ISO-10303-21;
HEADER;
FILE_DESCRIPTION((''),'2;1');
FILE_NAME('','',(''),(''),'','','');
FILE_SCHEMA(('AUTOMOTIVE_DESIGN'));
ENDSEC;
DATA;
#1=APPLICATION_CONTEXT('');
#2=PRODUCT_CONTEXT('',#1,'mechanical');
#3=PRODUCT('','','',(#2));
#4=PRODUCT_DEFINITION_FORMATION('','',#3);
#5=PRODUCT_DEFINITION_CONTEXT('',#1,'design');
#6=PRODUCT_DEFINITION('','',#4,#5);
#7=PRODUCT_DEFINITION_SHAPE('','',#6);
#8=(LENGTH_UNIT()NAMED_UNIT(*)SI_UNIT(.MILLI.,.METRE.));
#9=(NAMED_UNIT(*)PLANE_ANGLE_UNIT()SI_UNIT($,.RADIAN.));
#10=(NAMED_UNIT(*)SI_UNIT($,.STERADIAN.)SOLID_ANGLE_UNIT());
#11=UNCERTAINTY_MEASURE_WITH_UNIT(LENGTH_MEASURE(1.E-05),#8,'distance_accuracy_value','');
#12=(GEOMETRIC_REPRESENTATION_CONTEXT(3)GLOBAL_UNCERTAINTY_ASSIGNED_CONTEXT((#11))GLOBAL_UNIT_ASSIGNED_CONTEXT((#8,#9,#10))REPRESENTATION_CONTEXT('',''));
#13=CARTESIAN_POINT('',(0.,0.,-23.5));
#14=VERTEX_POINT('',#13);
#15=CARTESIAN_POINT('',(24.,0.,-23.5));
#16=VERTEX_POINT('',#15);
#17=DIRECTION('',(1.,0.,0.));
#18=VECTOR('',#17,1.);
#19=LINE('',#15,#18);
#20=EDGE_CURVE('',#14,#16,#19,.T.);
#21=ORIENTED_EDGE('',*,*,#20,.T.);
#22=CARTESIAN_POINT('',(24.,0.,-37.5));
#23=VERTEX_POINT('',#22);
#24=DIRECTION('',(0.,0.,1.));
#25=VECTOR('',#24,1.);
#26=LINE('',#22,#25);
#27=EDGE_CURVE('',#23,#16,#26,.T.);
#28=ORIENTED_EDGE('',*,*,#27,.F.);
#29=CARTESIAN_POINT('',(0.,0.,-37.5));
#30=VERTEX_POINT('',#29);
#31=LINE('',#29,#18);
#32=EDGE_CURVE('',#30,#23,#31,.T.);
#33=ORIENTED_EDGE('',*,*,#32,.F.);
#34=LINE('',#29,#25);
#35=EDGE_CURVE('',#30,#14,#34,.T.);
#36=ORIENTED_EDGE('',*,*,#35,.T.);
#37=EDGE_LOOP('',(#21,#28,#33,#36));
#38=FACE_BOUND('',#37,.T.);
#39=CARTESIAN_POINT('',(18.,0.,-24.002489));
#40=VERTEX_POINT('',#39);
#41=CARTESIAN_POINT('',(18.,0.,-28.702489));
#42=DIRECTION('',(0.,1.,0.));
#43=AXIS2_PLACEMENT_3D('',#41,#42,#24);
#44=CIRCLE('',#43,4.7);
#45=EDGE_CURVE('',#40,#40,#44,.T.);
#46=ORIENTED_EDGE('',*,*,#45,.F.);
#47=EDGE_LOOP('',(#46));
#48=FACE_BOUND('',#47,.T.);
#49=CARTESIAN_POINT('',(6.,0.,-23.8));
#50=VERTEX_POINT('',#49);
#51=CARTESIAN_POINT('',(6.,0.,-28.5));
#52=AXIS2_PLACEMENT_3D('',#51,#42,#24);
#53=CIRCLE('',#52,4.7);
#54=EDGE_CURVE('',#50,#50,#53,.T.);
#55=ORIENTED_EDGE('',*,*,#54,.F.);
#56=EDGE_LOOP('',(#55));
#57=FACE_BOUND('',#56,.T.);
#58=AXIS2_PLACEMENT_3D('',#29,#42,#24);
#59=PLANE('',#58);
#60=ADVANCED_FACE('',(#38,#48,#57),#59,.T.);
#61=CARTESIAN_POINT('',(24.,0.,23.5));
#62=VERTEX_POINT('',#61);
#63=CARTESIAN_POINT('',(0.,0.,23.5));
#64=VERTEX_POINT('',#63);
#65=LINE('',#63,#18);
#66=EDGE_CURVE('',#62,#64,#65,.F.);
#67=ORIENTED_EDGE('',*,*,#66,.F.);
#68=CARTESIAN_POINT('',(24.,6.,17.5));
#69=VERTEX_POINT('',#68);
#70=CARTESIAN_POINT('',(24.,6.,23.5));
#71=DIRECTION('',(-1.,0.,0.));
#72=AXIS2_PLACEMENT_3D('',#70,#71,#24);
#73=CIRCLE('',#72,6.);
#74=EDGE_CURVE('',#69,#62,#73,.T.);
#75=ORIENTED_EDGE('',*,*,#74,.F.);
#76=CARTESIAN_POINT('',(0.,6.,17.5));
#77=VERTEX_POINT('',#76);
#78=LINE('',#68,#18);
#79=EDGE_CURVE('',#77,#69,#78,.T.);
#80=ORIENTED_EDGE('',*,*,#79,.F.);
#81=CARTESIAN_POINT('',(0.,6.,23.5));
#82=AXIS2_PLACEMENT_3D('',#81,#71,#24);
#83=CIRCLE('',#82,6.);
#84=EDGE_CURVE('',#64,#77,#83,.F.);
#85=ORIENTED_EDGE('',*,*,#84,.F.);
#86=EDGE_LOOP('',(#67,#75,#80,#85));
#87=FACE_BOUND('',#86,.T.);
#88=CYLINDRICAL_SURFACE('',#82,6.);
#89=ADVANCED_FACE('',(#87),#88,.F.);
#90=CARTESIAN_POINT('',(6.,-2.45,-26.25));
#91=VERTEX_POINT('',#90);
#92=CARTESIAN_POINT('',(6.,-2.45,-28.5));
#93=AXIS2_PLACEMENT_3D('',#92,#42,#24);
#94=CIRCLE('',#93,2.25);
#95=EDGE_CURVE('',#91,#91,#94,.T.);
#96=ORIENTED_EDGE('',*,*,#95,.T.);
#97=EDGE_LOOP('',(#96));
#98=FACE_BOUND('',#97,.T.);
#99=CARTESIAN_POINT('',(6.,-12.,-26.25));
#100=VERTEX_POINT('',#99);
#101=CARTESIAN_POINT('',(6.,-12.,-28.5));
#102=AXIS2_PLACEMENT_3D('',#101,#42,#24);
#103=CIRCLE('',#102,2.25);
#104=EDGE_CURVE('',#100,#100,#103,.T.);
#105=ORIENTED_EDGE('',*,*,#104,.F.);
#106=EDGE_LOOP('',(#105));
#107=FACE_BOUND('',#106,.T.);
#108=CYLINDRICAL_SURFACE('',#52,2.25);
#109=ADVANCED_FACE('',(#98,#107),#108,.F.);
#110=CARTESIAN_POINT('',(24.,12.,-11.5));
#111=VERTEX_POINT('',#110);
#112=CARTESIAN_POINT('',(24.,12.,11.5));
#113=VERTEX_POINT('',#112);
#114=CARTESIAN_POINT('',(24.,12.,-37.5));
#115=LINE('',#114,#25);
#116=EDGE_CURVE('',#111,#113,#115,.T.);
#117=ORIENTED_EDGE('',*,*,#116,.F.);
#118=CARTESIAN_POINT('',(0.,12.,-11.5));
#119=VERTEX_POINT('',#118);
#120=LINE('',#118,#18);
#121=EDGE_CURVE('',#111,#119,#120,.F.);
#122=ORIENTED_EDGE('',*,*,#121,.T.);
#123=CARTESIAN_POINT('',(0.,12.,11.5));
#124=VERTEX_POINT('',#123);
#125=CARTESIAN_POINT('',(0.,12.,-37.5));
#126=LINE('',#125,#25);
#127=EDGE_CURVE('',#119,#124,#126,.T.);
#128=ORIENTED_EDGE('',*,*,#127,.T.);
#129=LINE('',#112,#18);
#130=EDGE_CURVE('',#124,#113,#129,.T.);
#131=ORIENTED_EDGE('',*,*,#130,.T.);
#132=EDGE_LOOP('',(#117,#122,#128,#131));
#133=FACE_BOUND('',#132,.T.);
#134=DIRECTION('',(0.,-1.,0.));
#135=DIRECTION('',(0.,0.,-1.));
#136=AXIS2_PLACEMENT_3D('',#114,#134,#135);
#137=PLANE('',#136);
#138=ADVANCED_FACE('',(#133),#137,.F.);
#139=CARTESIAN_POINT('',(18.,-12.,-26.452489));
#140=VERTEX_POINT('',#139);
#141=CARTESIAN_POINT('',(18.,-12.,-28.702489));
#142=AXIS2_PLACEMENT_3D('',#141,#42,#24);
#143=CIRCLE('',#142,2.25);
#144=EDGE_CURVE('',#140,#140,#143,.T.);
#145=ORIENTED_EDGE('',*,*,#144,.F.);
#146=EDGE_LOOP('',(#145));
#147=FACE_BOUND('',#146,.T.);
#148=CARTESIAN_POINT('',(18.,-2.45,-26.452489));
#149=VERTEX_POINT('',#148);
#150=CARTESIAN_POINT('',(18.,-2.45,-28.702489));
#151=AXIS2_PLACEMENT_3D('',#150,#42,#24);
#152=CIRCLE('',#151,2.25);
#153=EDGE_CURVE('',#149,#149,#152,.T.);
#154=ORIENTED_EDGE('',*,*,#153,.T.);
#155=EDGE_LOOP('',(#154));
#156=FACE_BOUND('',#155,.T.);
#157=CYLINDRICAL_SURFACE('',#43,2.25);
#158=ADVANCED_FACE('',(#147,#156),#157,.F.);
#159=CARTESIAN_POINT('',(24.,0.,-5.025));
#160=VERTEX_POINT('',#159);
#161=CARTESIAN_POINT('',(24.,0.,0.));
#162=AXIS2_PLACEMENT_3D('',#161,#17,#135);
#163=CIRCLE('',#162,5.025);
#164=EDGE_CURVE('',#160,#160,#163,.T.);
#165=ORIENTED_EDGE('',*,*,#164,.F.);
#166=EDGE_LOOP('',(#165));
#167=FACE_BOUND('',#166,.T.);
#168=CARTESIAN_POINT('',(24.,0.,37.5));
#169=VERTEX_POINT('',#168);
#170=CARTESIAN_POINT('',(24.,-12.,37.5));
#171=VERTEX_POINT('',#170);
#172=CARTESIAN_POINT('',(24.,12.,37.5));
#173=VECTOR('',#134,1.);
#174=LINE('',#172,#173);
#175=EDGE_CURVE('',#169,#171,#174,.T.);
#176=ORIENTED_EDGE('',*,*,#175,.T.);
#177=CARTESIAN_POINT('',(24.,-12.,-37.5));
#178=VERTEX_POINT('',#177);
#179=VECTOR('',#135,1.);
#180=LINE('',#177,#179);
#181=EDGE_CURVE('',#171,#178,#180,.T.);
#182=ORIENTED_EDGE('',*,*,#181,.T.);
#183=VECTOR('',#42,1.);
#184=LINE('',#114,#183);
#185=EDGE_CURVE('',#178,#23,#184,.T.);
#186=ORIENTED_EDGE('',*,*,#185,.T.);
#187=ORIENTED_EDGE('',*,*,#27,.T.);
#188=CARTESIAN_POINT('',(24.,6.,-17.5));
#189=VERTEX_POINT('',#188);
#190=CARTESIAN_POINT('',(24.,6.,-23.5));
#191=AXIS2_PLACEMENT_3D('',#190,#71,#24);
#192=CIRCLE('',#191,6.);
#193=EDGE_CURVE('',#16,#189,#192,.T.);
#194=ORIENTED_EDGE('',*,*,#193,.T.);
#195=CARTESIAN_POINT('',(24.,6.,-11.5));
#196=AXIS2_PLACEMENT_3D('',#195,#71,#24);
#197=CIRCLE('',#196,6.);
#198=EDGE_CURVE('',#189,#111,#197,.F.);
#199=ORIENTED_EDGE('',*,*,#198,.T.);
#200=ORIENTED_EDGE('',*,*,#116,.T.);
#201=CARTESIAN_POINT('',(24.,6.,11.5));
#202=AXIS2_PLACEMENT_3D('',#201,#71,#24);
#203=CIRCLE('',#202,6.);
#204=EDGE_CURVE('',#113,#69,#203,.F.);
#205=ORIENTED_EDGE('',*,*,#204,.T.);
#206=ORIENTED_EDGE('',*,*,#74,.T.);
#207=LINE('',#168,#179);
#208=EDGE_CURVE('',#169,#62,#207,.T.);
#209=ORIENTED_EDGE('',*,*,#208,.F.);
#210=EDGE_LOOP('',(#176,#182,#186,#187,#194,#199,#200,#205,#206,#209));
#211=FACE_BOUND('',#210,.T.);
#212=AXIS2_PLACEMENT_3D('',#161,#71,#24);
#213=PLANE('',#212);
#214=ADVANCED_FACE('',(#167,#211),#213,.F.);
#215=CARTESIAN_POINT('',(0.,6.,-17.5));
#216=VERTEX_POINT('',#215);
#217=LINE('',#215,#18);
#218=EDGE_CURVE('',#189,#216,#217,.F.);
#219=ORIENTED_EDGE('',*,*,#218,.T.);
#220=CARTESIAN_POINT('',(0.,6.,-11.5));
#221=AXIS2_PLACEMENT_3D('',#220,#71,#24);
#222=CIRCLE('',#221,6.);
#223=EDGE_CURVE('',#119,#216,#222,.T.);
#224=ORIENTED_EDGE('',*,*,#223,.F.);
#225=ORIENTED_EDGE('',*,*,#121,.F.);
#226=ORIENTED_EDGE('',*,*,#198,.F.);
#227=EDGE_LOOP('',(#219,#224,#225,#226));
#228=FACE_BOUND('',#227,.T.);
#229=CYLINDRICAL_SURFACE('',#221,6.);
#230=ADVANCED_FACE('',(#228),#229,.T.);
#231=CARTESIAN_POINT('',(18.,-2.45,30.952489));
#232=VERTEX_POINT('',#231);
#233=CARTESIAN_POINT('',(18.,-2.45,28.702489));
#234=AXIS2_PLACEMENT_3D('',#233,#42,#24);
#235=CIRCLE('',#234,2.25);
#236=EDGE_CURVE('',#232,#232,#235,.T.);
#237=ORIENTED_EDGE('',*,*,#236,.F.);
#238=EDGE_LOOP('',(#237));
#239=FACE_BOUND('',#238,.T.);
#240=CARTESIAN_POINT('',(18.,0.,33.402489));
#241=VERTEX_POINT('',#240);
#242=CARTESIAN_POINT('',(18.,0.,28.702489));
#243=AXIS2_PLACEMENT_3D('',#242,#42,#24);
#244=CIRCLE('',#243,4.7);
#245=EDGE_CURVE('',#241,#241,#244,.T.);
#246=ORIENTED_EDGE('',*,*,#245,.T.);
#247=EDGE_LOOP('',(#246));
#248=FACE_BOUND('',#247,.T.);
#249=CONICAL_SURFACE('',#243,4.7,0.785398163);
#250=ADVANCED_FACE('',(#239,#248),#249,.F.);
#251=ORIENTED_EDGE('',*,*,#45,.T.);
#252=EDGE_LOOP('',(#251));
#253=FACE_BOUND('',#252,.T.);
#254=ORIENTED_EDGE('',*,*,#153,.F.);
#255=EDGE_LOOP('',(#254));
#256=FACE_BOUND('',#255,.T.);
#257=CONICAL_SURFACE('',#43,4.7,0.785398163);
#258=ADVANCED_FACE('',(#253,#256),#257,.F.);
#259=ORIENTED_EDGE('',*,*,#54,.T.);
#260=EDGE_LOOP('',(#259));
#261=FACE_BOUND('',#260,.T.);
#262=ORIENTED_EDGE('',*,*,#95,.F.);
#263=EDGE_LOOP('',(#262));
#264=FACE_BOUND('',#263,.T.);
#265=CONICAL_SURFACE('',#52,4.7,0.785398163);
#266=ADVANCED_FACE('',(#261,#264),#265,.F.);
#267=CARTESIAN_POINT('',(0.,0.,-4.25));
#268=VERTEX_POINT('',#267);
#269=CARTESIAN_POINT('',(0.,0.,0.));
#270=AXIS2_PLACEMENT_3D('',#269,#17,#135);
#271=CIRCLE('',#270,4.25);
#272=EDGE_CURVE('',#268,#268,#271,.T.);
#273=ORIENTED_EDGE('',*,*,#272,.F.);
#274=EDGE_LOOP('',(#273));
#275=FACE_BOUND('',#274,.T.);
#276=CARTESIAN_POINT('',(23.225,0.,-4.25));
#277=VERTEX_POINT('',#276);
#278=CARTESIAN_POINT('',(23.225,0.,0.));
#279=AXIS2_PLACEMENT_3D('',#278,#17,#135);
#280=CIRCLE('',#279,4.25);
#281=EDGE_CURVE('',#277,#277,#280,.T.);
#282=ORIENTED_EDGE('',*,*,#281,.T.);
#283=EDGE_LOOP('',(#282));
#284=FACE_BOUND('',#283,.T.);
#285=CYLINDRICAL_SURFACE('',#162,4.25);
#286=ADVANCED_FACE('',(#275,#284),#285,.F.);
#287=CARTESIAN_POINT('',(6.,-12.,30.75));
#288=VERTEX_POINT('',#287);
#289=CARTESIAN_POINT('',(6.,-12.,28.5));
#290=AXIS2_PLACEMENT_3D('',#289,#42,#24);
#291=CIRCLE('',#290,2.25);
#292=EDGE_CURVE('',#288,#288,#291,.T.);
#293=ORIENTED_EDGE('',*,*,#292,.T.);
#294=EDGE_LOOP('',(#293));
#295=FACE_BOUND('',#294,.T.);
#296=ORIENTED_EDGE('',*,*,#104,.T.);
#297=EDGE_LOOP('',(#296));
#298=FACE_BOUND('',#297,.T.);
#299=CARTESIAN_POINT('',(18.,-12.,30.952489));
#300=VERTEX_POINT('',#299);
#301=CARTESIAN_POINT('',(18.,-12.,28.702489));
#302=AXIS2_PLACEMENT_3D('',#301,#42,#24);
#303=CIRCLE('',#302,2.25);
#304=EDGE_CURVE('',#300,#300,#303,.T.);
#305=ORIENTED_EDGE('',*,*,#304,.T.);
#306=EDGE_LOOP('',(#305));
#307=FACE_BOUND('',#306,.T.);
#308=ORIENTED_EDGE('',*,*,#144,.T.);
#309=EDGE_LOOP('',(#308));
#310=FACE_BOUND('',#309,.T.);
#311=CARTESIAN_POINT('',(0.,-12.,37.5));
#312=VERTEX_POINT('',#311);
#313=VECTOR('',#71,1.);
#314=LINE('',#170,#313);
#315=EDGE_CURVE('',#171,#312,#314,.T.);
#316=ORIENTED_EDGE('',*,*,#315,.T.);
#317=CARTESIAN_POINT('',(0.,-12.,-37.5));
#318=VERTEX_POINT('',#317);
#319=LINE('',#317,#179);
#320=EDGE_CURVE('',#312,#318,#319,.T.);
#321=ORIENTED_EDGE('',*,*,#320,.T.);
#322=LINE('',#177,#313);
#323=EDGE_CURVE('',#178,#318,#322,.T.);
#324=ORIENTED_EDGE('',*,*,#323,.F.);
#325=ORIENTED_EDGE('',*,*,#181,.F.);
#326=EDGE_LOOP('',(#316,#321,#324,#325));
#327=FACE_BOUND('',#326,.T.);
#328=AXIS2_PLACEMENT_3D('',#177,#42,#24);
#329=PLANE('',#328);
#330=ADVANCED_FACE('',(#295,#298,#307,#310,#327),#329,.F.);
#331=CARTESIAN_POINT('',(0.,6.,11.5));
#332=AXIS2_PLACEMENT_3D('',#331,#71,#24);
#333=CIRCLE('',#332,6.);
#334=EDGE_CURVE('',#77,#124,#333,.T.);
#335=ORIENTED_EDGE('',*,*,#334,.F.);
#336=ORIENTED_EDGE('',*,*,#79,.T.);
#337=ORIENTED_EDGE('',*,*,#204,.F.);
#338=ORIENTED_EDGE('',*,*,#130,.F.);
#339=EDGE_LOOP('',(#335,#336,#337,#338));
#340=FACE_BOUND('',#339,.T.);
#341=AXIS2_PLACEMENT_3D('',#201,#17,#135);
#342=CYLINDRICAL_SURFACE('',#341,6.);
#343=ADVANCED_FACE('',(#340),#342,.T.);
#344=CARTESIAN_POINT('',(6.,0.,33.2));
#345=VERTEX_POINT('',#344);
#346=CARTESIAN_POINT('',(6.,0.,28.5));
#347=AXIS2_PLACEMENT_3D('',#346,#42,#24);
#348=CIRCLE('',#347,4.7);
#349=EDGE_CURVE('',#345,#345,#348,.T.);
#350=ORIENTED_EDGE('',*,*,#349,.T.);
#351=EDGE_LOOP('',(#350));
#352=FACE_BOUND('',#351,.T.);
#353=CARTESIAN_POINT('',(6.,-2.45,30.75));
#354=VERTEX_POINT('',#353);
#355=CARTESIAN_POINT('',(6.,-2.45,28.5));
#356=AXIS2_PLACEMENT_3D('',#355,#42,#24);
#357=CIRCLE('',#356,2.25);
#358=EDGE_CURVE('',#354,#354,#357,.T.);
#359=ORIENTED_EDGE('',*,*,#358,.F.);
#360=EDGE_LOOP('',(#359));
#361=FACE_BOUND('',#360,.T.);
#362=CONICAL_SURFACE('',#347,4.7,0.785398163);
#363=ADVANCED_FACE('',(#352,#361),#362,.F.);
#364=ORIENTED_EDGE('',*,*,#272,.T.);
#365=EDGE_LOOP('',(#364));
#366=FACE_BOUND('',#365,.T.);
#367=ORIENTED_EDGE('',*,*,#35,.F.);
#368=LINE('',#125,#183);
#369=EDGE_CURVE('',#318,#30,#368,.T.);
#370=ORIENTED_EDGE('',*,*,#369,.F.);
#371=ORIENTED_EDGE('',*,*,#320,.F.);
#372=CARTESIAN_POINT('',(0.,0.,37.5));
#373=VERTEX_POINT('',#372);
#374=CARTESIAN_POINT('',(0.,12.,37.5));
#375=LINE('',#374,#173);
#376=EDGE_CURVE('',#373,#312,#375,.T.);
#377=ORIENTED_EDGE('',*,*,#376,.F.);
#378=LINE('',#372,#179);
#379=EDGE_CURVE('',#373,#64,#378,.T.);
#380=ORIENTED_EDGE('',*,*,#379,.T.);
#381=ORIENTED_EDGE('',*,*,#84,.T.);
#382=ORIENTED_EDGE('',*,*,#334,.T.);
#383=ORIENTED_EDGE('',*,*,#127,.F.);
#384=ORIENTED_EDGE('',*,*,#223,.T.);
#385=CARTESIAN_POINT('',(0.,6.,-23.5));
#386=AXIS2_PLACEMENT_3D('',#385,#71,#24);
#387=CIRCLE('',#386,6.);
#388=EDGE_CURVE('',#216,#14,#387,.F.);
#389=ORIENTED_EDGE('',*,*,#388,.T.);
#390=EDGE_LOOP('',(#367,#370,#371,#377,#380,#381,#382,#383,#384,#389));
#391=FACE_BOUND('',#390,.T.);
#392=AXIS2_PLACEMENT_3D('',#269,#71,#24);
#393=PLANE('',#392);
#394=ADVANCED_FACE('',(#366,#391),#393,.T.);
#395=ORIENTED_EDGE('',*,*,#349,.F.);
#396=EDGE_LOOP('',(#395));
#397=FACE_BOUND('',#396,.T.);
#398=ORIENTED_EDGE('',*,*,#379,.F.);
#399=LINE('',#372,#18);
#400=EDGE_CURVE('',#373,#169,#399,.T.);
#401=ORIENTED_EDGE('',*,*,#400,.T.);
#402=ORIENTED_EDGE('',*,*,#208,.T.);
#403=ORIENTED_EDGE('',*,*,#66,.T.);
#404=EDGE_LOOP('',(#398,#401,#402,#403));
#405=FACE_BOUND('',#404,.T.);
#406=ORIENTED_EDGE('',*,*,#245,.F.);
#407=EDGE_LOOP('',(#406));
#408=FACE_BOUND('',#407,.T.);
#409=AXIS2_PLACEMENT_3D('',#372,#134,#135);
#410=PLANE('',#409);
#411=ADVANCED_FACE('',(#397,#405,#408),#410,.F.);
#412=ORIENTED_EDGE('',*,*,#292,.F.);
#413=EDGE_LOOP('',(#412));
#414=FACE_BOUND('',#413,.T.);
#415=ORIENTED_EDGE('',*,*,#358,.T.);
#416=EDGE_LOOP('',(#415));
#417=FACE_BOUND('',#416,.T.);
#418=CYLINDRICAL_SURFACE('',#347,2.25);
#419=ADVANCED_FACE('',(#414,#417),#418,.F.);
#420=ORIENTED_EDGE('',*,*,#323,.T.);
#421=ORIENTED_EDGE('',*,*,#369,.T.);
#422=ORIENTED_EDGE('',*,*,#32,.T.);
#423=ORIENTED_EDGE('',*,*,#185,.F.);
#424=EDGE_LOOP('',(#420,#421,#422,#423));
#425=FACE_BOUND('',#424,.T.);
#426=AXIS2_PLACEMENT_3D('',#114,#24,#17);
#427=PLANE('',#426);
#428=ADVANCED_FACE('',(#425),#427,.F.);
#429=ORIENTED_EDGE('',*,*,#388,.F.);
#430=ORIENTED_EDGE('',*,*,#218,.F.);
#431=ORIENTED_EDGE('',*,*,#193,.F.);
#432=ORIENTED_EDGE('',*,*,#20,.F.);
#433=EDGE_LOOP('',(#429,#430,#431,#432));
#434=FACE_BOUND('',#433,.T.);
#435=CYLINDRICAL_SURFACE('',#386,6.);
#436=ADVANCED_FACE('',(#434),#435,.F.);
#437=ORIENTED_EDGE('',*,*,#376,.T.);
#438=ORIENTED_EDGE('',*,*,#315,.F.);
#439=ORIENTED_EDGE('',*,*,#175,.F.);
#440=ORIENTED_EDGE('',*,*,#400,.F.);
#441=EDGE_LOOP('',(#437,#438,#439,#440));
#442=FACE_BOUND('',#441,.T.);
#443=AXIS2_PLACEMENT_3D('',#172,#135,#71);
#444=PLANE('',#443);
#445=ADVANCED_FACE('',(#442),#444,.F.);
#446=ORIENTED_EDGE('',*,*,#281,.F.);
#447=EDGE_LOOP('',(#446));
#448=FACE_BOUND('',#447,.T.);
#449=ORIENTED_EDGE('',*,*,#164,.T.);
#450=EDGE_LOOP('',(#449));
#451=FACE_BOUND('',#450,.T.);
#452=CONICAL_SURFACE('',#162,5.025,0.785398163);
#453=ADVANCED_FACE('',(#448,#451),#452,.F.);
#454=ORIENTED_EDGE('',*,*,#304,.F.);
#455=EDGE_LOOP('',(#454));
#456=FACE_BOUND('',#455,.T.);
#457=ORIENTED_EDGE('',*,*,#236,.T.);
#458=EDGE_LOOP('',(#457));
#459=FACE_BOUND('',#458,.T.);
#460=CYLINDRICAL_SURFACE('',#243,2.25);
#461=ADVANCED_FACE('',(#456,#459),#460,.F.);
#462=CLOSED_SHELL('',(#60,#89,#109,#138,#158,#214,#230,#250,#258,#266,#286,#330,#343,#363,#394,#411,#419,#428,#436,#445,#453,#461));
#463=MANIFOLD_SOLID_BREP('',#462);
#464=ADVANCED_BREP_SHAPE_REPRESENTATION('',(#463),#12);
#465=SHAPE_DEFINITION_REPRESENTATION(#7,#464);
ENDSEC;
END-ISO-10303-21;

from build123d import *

# Parameters (mm, degrees)
SKETCH1_W                                       = 75
SKETCH1_H                                       = 24
BOSS_EXTRUDE1_DEPTH                             = 24
SKETCH2_W                                       = 20
SKETCH2_H                                       = 12
CUT_EXTRUDE1_DEPTH                              = 24
FILLET1_START                                   = -1
FILLET1_DEPTH                                   = 26
FILLET1_2_DEPTH                                 = 24
CSK_FOR_M4_FLAT_HEAD_MACHINE_SCREW1_D           = 4.5
CSK_FOR_M4_FLAT_HEAD_MACHINE_SCREW1_CSINK_D     = 9.4
CSK_FOR_M4_FLAT_HEAD_MACHINE_SCREW1_CSINK_ANGLE = 90
M10X1_5_TAPPED_HOLE1_D                          = 8.5
M10X1_5_TAPPED_HOLE1_CSINK_D                    = 10.05
M10X1_5_TAPPED_HOLE1_CSINK_ANGLE                = 90


with BuildPart() as part:
    # Sketch1 → Boss-Extrude1 (new body)
    with BuildSketch(Plane(origin=(0, 0, 0), x_dir=(0, 0, -1), z_dir=(1, 0, 0))):
        Rectangle(SKETCH1_W, SKETCH1_H)
    extrude(amount=BOSS_EXTRUDE1_DEPTH)

    # Sketch2 → Cut-Extrude1 (cut)
    with BuildSketch(Plane(origin=(24, 0, 0), x_dir=(0, 0, -1), z_dir=(1, 0, 0))):
        with Locations((-27.5, 6)):
            Rectangle(SKETCH2_W, SKETCH2_H)
    cut_extrude1 = extrude(amount=-CUT_EXTRUDE1_DEPTH, mode=Mode.SUBTRACT)

    # Fillet1: read off the stored shape, not the designer's step
    # Fillet1 outline → Fillet1 (cut)
    with BuildSketch(Plane.YZ.offset(FILLET1_START)):
        with BuildLine():
            Line((12, 17.5), (6, 17.5))
            ThreePointArc((6, 17.5), (10.242640687, 15.742640687), (12, 11.5))
            Line((12, 11.5), (12, 17.5))
        make_face()
    fillet1 = extrude(amount=FILLET1_DEPTH, mode=Mode.SUBTRACT)

    # Fillet1 2 outline → Fillet1 2 (add)
    with BuildSketch(Plane.YZ):
        with BuildLine():
            Line((0, 17.5), (6, 17.5))
            ThreePointArc((6, 17.5), (1.757359313, 19.257359313), (0, 23.5))
            Line((0, 23.5), (0, 17.5))
        make_face()
    fillet1_2 = extrude(amount=FILLET1_2_DEPTH)

    # CSK for M4 Flat Head Machine Screw1 (through all)
    with Locations(Plane(origin=(0, 0, 0), x_dir=(1, 0, 0), z_dir=(0, 1, 0))):
        with Locations((6, -28.5), (18, -28.702489343)):
            csk_for_m4_flat_head_machine_screw1 = CounterSinkHole(CSK_FOR_M4_FLAT_HEAD_MACHINE_SCREW1_D / 2, CSK_FOR_M4_FLAT_HEAD_MACHINE_SCREW1_CSINK_D / 2, counter_sink_angle=CSK_FOR_M4_FLAT_HEAD_MACHINE_SCREW1_CSINK_ANGLE)

    # Mirror1: Cut-Extrude1, Fillet1, Fillet1 2, CSK for M4 Flat Head Machine Screw1 across plane
    add(cut_extrude1.mirror(Plane.XY), mode=Mode.SUBTRACT)
    add(fillet1.mirror(Plane.XY), mode=Mode.SUBTRACT)
    add(fillet1_2.mirror(Plane.XY))
    add(csk_for_m4_flat_head_machine_screw1.mirror(Plane.XY), mode=Mode.SUBTRACT)

    # M10x1.5 Tapped Hole1 (through all)
    with Locations(Plane(origin=(24, 0, 0), x_dir=(0, 0, -1), z_dir=(1, 0, 0))):
        with Locations((0, 0)):
            CounterSinkHole(M10X1_5_TAPPED_HOLE1_D / 2, M10X1_5_TAPPED_HOLE1_CSINK_D / 2, counter_sink_angle=M10X1_5_TAPPED_HOLE1_CSINK_ANGLE)


solid = part.part
